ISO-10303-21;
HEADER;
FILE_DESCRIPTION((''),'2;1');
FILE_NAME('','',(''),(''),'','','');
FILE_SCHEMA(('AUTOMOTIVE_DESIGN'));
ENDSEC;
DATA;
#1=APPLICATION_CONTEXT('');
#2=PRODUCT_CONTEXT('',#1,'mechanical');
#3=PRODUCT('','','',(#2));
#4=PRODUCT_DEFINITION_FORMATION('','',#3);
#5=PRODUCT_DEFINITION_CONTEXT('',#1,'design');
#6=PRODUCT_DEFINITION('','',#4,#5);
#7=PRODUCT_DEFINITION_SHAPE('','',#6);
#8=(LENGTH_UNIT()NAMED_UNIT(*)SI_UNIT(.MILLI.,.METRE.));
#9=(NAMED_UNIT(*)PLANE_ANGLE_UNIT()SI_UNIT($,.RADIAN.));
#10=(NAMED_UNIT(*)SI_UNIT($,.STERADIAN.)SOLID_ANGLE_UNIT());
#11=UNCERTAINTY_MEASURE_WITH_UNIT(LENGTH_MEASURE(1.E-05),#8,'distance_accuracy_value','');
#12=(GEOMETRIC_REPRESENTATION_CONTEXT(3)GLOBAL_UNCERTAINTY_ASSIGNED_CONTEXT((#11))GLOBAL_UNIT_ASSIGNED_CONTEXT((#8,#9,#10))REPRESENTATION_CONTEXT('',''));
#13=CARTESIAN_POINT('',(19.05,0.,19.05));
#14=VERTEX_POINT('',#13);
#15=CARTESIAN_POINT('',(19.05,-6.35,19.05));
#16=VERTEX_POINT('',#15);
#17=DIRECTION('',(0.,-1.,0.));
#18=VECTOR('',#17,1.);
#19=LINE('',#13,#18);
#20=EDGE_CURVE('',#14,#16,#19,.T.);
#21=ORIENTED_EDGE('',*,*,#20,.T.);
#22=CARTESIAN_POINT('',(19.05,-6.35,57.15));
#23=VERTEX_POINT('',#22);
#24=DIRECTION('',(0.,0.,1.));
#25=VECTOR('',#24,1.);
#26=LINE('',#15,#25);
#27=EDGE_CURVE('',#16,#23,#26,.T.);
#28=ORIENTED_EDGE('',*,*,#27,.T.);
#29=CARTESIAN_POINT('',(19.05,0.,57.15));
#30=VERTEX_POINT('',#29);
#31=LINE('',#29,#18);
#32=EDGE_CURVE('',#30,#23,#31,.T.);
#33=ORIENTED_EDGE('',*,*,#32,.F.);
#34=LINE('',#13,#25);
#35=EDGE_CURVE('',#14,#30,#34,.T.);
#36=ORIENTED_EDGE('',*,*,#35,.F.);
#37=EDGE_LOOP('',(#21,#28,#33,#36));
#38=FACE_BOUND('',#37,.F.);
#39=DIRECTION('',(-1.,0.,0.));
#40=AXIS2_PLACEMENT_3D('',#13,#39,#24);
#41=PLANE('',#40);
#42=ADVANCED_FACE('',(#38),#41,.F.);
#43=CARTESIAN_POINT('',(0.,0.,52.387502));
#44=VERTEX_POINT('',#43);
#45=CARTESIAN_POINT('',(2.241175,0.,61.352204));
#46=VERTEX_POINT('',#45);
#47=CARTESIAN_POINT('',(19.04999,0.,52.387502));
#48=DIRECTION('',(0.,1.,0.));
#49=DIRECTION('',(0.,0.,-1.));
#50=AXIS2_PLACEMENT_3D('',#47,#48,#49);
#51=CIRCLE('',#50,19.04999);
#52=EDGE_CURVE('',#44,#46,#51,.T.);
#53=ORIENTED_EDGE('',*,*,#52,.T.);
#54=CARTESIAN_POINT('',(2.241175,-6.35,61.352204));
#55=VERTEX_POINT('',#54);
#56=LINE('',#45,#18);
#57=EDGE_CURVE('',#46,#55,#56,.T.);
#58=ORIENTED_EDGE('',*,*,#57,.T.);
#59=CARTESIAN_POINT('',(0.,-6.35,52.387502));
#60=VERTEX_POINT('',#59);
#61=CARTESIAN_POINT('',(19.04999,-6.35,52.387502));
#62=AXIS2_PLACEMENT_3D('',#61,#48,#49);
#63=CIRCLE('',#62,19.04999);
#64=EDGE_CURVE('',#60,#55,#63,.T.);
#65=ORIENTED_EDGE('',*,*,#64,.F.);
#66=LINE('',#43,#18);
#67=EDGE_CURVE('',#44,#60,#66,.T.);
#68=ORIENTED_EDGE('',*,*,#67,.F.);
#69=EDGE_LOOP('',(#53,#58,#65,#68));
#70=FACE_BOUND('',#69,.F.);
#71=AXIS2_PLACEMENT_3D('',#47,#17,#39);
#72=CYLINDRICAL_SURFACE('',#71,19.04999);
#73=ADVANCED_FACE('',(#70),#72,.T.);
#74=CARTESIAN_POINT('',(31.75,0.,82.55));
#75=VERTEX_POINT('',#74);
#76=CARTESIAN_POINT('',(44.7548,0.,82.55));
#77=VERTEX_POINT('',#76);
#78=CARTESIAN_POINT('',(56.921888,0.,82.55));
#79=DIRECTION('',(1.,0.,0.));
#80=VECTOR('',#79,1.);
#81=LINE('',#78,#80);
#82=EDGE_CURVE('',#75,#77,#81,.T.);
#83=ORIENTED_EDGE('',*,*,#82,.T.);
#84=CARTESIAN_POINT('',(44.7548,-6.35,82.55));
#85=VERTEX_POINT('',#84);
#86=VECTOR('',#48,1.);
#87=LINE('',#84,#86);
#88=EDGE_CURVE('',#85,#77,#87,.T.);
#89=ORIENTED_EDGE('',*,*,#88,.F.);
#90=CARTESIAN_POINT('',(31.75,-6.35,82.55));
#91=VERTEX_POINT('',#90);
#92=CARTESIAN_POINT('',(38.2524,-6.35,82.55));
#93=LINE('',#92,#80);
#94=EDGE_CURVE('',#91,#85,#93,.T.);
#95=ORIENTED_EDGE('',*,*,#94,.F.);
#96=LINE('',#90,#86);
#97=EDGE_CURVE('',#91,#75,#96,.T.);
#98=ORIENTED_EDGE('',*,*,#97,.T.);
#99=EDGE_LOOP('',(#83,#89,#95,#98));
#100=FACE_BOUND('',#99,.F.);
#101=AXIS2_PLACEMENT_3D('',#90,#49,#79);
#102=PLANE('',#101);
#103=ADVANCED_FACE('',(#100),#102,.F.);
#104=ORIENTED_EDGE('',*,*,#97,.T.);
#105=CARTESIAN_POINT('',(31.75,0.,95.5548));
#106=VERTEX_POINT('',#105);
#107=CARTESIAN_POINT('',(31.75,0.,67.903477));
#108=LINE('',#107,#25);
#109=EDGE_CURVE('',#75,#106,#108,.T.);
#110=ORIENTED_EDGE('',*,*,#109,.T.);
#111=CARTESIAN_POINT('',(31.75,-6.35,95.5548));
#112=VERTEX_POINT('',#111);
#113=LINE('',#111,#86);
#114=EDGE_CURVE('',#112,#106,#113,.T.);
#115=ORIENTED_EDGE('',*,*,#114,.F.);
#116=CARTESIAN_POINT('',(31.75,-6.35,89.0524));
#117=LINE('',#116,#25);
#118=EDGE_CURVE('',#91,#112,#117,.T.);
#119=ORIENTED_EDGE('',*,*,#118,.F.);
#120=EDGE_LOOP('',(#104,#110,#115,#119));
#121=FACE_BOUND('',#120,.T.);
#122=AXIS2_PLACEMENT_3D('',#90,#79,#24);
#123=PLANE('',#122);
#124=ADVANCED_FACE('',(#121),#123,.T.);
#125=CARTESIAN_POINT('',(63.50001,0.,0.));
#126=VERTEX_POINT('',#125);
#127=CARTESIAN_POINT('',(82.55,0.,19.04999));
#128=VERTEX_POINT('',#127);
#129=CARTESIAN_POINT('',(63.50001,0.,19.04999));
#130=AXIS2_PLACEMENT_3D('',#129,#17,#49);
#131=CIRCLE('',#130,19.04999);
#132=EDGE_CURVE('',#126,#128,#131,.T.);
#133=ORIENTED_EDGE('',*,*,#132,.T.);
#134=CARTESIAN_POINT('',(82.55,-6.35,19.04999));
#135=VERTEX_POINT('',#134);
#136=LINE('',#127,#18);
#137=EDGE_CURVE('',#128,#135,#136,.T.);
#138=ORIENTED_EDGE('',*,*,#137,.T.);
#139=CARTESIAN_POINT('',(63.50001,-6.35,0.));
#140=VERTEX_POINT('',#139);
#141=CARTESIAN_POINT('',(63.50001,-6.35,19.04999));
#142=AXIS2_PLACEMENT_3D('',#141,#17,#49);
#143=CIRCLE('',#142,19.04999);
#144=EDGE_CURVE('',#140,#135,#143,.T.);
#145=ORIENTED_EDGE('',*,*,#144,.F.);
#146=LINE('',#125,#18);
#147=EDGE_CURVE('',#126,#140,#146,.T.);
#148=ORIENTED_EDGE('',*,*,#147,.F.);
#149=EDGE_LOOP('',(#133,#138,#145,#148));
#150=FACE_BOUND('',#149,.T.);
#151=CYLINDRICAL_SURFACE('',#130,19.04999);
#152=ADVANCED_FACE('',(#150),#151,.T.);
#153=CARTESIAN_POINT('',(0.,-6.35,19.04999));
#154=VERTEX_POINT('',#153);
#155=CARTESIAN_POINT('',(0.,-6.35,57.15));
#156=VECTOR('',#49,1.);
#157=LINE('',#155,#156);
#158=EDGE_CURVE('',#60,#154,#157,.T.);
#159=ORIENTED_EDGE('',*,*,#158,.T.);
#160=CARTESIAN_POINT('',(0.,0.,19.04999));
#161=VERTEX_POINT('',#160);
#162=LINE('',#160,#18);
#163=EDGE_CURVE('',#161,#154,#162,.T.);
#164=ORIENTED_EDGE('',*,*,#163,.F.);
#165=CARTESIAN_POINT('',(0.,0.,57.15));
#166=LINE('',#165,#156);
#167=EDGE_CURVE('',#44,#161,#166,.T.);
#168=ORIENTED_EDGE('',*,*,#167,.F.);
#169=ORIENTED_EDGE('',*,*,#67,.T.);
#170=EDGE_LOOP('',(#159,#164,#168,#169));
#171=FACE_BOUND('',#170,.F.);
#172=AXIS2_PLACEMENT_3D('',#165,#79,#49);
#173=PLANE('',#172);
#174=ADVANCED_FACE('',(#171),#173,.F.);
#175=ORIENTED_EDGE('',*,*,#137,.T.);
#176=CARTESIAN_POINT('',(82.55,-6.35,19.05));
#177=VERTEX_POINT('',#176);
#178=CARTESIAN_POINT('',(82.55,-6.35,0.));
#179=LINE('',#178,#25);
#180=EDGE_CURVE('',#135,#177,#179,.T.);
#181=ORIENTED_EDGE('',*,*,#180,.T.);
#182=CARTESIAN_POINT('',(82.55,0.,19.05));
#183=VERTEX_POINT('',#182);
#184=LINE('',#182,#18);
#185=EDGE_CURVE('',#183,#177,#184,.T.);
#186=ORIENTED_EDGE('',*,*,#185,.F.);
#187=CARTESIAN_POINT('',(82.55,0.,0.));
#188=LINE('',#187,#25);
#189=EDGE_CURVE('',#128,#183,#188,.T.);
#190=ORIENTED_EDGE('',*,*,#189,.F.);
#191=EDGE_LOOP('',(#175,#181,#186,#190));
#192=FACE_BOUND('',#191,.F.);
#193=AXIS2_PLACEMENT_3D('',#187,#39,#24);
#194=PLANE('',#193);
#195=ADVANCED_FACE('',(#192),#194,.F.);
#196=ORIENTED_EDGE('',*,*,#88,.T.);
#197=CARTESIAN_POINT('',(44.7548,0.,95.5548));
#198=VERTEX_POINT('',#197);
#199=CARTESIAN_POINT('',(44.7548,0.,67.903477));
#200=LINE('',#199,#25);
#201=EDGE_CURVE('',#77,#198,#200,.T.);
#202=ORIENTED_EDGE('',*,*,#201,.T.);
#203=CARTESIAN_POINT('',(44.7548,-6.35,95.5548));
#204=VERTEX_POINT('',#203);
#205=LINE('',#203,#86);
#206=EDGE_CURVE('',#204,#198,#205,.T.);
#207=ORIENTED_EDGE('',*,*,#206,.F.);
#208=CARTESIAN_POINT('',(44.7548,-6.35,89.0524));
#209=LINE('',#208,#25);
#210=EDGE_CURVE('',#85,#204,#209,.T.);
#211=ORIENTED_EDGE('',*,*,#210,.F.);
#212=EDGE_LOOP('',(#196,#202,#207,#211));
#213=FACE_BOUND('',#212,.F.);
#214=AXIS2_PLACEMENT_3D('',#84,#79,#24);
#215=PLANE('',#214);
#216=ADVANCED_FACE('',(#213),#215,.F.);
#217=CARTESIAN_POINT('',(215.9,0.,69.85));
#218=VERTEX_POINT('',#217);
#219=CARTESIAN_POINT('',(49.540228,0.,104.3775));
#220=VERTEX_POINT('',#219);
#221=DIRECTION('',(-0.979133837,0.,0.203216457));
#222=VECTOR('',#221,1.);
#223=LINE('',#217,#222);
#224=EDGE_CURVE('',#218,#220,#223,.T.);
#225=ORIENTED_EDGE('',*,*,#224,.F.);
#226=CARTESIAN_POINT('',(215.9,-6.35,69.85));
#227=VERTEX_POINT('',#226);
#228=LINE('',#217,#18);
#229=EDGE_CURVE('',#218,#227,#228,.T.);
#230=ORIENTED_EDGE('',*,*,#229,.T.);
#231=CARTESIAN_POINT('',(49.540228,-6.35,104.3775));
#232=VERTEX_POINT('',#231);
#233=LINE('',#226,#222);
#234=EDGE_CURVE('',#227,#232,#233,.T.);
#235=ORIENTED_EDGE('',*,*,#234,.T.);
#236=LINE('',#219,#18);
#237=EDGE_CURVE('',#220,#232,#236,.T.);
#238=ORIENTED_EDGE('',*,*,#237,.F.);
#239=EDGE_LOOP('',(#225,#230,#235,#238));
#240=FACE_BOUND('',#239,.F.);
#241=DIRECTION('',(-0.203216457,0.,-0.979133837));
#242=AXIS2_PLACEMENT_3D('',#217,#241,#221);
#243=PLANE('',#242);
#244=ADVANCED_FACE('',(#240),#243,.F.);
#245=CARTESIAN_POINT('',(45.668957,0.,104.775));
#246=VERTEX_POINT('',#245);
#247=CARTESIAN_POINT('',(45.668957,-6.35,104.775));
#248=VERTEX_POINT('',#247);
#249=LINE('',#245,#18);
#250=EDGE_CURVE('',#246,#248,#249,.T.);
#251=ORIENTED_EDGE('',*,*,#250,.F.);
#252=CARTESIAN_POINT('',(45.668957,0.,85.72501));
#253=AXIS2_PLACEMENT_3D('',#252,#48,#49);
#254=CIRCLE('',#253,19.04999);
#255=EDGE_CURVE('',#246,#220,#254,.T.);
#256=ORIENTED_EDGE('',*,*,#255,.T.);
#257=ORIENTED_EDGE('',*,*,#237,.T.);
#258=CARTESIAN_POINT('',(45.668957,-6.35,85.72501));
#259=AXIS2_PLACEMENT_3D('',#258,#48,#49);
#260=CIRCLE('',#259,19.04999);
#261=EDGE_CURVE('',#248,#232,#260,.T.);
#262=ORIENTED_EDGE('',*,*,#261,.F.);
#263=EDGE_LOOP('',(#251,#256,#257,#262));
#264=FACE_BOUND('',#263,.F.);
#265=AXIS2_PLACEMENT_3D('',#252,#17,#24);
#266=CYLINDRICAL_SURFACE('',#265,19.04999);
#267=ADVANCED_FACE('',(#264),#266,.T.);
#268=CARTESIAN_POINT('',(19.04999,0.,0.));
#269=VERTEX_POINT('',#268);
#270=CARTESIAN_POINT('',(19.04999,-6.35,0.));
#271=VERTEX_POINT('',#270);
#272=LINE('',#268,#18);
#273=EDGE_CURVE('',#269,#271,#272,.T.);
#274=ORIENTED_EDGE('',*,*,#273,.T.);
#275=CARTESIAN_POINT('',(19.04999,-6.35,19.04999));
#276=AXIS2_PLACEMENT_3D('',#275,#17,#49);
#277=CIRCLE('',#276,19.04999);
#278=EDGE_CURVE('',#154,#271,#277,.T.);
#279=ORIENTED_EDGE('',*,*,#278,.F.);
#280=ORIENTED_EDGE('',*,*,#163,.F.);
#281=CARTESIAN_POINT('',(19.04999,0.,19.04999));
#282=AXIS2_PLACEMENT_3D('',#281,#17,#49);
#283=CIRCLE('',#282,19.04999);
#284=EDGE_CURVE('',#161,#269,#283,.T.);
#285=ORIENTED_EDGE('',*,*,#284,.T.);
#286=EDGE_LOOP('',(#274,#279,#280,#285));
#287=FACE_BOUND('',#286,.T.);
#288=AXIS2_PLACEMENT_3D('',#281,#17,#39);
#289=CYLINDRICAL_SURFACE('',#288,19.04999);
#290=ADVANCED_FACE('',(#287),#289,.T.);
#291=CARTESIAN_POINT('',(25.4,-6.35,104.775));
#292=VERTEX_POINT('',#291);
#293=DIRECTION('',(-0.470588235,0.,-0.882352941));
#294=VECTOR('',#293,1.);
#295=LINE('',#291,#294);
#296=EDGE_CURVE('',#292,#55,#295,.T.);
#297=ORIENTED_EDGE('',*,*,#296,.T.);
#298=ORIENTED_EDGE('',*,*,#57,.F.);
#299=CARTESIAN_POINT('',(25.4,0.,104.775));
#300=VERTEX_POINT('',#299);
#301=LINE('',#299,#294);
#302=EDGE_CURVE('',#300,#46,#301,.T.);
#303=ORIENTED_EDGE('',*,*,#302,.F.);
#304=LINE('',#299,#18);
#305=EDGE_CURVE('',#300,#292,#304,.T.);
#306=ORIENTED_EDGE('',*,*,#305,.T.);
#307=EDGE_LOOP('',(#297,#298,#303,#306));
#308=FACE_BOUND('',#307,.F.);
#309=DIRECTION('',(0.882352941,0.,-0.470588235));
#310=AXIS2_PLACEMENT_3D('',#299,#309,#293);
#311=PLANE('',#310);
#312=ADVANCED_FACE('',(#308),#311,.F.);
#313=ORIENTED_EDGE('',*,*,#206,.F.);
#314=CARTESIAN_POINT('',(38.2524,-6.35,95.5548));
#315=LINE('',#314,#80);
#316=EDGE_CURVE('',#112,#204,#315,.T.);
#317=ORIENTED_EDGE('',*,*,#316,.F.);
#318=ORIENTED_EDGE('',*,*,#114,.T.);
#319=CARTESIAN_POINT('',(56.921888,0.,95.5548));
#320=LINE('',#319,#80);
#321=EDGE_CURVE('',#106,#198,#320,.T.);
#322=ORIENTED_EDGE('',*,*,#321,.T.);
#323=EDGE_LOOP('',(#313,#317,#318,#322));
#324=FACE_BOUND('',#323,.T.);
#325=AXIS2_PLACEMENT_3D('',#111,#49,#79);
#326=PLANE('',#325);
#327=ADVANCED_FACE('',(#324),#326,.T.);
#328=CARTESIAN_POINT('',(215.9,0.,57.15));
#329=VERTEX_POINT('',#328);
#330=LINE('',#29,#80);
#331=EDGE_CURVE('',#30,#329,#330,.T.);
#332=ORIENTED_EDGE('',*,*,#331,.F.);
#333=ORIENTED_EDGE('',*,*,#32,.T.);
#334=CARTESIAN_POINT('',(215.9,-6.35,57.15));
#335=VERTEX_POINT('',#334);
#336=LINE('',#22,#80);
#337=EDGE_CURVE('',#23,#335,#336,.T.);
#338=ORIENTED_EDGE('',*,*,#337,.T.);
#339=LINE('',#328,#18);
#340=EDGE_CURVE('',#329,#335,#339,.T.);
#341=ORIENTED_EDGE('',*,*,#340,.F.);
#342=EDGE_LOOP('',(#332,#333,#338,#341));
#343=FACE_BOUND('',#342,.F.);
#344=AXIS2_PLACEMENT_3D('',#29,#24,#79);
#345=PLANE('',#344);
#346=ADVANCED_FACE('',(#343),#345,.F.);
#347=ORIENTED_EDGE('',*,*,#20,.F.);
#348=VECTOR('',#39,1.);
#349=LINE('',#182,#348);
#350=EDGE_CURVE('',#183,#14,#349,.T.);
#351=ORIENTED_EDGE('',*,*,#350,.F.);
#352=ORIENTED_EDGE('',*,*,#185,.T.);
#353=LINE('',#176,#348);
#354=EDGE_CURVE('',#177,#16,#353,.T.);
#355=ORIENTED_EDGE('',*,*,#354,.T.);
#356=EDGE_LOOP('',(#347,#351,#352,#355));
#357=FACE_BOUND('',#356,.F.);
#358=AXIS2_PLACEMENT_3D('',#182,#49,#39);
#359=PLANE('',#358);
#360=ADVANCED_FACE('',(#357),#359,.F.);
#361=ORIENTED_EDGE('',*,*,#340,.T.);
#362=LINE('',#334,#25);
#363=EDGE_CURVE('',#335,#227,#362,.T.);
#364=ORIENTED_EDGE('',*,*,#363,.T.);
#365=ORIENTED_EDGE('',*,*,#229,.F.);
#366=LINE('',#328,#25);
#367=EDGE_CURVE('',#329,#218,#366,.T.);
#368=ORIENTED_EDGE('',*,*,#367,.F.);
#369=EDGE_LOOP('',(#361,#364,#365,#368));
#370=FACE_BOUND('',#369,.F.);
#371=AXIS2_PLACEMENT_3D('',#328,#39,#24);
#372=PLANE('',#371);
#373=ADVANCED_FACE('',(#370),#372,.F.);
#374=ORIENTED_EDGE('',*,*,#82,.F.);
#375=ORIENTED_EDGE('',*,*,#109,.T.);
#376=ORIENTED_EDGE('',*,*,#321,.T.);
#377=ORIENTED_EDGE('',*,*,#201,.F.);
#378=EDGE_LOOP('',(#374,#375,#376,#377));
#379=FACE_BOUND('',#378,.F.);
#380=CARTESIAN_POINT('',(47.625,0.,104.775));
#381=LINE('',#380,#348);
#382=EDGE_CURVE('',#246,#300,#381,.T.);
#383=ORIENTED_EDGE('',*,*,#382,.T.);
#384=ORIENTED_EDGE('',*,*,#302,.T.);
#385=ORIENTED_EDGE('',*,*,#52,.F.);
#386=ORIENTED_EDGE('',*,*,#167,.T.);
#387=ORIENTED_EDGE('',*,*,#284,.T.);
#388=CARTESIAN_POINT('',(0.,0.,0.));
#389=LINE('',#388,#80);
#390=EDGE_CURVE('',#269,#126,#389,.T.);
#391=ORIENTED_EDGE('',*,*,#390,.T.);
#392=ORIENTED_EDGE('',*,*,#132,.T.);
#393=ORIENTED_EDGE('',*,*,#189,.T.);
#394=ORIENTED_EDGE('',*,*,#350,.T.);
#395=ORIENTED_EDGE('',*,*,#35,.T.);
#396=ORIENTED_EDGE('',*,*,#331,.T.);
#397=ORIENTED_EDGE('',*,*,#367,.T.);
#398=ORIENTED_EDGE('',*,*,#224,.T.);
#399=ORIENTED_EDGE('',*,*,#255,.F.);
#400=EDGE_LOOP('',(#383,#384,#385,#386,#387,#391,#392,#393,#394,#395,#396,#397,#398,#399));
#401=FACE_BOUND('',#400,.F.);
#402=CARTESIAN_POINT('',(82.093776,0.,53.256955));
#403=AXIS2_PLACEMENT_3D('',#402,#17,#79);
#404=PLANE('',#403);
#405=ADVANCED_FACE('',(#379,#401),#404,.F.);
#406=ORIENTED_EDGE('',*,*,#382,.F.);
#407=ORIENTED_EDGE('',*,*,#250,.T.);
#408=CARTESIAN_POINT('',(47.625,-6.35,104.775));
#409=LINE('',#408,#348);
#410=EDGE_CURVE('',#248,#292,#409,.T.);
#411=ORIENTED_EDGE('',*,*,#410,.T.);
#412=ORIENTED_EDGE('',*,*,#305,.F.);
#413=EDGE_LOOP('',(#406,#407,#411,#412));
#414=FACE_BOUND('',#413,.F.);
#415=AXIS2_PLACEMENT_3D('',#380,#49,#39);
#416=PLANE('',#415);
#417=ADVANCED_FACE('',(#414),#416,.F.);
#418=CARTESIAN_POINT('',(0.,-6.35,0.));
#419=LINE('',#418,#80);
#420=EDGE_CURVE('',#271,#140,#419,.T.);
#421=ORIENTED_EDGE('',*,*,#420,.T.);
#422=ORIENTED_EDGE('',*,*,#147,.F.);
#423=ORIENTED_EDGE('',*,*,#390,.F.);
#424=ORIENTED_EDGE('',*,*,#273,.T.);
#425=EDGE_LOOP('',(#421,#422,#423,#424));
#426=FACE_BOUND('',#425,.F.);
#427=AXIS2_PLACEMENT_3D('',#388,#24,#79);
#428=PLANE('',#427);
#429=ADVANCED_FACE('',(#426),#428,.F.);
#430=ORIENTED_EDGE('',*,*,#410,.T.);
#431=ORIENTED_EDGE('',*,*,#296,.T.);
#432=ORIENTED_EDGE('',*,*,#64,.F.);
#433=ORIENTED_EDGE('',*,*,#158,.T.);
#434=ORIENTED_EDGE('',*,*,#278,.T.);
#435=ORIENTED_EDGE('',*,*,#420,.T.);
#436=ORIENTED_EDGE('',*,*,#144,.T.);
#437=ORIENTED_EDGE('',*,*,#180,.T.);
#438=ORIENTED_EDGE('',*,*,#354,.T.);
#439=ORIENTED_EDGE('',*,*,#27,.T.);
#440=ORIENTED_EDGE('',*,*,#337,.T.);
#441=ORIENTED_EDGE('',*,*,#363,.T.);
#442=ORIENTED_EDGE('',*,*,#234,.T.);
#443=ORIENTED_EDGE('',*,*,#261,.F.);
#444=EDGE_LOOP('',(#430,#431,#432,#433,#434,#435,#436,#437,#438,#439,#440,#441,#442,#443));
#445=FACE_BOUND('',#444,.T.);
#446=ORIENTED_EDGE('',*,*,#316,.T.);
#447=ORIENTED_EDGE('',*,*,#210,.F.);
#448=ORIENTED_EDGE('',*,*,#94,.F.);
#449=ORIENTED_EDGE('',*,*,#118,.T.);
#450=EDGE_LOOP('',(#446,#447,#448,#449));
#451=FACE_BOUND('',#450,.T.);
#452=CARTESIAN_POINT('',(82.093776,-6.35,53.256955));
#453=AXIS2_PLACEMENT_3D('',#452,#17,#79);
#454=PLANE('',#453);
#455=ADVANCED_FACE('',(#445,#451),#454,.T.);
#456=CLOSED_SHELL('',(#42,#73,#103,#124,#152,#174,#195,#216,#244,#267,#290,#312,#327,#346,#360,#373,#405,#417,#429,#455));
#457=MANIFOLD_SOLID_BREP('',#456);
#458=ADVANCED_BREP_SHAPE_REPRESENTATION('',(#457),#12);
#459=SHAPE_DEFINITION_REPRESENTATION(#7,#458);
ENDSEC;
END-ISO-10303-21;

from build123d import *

# Parameters (mm, degrees)
F1_DEPTH = 6.35
F2_W     = 13.0048
F2_H     = 13.0048
F3_DEPTH = 6.351
F4_R     = 19.04999


# Not quite as in the source:
# - a fillet or chamfer is up to 0.001 mm smaller than in the source, because OpenCascade refuses the exact size


with BuildPart() as f1:
    # F0 (on Front) → F1 (new body)
    with BuildSketch(Plane.XZ):
        Polygon((0, 57.15), (0, 0), (82.55, 0), (82.55, 19.05), (19.05, 19.05), (19.05, 57.15), (215.9, 57.15), (215.9, 69.85), (47.625, 104.775), (25.4, 104.775), align=None)
    extrude(amount=F1_DEPTH)

    # F2 (on face) → F3 (cut, through all)
    with BuildSketch(Plane.XZ.offset(6.35)):
        with Locations((38.2524, 89.0524)):
            Rectangle(F2_W, F2_H)
    extrude(amount=-F3_DEPTH, mode=Mode.SUBTRACT)

    # F4 (radius 19.05 in the source; OpenCascade refuses exactly that, so slightly less here)
    f4_edges = [f1.edges().sort_by_distance(p)[0] for p in [
        (0, -3.175, 0),
        (82.55, -3.175, 0),
        (0, -3.175, 57.15),
        (47.625, -3.175, 104.775),
    ]]
    fillet(f4_edges, radius=F4_R)


solid = f1.part
